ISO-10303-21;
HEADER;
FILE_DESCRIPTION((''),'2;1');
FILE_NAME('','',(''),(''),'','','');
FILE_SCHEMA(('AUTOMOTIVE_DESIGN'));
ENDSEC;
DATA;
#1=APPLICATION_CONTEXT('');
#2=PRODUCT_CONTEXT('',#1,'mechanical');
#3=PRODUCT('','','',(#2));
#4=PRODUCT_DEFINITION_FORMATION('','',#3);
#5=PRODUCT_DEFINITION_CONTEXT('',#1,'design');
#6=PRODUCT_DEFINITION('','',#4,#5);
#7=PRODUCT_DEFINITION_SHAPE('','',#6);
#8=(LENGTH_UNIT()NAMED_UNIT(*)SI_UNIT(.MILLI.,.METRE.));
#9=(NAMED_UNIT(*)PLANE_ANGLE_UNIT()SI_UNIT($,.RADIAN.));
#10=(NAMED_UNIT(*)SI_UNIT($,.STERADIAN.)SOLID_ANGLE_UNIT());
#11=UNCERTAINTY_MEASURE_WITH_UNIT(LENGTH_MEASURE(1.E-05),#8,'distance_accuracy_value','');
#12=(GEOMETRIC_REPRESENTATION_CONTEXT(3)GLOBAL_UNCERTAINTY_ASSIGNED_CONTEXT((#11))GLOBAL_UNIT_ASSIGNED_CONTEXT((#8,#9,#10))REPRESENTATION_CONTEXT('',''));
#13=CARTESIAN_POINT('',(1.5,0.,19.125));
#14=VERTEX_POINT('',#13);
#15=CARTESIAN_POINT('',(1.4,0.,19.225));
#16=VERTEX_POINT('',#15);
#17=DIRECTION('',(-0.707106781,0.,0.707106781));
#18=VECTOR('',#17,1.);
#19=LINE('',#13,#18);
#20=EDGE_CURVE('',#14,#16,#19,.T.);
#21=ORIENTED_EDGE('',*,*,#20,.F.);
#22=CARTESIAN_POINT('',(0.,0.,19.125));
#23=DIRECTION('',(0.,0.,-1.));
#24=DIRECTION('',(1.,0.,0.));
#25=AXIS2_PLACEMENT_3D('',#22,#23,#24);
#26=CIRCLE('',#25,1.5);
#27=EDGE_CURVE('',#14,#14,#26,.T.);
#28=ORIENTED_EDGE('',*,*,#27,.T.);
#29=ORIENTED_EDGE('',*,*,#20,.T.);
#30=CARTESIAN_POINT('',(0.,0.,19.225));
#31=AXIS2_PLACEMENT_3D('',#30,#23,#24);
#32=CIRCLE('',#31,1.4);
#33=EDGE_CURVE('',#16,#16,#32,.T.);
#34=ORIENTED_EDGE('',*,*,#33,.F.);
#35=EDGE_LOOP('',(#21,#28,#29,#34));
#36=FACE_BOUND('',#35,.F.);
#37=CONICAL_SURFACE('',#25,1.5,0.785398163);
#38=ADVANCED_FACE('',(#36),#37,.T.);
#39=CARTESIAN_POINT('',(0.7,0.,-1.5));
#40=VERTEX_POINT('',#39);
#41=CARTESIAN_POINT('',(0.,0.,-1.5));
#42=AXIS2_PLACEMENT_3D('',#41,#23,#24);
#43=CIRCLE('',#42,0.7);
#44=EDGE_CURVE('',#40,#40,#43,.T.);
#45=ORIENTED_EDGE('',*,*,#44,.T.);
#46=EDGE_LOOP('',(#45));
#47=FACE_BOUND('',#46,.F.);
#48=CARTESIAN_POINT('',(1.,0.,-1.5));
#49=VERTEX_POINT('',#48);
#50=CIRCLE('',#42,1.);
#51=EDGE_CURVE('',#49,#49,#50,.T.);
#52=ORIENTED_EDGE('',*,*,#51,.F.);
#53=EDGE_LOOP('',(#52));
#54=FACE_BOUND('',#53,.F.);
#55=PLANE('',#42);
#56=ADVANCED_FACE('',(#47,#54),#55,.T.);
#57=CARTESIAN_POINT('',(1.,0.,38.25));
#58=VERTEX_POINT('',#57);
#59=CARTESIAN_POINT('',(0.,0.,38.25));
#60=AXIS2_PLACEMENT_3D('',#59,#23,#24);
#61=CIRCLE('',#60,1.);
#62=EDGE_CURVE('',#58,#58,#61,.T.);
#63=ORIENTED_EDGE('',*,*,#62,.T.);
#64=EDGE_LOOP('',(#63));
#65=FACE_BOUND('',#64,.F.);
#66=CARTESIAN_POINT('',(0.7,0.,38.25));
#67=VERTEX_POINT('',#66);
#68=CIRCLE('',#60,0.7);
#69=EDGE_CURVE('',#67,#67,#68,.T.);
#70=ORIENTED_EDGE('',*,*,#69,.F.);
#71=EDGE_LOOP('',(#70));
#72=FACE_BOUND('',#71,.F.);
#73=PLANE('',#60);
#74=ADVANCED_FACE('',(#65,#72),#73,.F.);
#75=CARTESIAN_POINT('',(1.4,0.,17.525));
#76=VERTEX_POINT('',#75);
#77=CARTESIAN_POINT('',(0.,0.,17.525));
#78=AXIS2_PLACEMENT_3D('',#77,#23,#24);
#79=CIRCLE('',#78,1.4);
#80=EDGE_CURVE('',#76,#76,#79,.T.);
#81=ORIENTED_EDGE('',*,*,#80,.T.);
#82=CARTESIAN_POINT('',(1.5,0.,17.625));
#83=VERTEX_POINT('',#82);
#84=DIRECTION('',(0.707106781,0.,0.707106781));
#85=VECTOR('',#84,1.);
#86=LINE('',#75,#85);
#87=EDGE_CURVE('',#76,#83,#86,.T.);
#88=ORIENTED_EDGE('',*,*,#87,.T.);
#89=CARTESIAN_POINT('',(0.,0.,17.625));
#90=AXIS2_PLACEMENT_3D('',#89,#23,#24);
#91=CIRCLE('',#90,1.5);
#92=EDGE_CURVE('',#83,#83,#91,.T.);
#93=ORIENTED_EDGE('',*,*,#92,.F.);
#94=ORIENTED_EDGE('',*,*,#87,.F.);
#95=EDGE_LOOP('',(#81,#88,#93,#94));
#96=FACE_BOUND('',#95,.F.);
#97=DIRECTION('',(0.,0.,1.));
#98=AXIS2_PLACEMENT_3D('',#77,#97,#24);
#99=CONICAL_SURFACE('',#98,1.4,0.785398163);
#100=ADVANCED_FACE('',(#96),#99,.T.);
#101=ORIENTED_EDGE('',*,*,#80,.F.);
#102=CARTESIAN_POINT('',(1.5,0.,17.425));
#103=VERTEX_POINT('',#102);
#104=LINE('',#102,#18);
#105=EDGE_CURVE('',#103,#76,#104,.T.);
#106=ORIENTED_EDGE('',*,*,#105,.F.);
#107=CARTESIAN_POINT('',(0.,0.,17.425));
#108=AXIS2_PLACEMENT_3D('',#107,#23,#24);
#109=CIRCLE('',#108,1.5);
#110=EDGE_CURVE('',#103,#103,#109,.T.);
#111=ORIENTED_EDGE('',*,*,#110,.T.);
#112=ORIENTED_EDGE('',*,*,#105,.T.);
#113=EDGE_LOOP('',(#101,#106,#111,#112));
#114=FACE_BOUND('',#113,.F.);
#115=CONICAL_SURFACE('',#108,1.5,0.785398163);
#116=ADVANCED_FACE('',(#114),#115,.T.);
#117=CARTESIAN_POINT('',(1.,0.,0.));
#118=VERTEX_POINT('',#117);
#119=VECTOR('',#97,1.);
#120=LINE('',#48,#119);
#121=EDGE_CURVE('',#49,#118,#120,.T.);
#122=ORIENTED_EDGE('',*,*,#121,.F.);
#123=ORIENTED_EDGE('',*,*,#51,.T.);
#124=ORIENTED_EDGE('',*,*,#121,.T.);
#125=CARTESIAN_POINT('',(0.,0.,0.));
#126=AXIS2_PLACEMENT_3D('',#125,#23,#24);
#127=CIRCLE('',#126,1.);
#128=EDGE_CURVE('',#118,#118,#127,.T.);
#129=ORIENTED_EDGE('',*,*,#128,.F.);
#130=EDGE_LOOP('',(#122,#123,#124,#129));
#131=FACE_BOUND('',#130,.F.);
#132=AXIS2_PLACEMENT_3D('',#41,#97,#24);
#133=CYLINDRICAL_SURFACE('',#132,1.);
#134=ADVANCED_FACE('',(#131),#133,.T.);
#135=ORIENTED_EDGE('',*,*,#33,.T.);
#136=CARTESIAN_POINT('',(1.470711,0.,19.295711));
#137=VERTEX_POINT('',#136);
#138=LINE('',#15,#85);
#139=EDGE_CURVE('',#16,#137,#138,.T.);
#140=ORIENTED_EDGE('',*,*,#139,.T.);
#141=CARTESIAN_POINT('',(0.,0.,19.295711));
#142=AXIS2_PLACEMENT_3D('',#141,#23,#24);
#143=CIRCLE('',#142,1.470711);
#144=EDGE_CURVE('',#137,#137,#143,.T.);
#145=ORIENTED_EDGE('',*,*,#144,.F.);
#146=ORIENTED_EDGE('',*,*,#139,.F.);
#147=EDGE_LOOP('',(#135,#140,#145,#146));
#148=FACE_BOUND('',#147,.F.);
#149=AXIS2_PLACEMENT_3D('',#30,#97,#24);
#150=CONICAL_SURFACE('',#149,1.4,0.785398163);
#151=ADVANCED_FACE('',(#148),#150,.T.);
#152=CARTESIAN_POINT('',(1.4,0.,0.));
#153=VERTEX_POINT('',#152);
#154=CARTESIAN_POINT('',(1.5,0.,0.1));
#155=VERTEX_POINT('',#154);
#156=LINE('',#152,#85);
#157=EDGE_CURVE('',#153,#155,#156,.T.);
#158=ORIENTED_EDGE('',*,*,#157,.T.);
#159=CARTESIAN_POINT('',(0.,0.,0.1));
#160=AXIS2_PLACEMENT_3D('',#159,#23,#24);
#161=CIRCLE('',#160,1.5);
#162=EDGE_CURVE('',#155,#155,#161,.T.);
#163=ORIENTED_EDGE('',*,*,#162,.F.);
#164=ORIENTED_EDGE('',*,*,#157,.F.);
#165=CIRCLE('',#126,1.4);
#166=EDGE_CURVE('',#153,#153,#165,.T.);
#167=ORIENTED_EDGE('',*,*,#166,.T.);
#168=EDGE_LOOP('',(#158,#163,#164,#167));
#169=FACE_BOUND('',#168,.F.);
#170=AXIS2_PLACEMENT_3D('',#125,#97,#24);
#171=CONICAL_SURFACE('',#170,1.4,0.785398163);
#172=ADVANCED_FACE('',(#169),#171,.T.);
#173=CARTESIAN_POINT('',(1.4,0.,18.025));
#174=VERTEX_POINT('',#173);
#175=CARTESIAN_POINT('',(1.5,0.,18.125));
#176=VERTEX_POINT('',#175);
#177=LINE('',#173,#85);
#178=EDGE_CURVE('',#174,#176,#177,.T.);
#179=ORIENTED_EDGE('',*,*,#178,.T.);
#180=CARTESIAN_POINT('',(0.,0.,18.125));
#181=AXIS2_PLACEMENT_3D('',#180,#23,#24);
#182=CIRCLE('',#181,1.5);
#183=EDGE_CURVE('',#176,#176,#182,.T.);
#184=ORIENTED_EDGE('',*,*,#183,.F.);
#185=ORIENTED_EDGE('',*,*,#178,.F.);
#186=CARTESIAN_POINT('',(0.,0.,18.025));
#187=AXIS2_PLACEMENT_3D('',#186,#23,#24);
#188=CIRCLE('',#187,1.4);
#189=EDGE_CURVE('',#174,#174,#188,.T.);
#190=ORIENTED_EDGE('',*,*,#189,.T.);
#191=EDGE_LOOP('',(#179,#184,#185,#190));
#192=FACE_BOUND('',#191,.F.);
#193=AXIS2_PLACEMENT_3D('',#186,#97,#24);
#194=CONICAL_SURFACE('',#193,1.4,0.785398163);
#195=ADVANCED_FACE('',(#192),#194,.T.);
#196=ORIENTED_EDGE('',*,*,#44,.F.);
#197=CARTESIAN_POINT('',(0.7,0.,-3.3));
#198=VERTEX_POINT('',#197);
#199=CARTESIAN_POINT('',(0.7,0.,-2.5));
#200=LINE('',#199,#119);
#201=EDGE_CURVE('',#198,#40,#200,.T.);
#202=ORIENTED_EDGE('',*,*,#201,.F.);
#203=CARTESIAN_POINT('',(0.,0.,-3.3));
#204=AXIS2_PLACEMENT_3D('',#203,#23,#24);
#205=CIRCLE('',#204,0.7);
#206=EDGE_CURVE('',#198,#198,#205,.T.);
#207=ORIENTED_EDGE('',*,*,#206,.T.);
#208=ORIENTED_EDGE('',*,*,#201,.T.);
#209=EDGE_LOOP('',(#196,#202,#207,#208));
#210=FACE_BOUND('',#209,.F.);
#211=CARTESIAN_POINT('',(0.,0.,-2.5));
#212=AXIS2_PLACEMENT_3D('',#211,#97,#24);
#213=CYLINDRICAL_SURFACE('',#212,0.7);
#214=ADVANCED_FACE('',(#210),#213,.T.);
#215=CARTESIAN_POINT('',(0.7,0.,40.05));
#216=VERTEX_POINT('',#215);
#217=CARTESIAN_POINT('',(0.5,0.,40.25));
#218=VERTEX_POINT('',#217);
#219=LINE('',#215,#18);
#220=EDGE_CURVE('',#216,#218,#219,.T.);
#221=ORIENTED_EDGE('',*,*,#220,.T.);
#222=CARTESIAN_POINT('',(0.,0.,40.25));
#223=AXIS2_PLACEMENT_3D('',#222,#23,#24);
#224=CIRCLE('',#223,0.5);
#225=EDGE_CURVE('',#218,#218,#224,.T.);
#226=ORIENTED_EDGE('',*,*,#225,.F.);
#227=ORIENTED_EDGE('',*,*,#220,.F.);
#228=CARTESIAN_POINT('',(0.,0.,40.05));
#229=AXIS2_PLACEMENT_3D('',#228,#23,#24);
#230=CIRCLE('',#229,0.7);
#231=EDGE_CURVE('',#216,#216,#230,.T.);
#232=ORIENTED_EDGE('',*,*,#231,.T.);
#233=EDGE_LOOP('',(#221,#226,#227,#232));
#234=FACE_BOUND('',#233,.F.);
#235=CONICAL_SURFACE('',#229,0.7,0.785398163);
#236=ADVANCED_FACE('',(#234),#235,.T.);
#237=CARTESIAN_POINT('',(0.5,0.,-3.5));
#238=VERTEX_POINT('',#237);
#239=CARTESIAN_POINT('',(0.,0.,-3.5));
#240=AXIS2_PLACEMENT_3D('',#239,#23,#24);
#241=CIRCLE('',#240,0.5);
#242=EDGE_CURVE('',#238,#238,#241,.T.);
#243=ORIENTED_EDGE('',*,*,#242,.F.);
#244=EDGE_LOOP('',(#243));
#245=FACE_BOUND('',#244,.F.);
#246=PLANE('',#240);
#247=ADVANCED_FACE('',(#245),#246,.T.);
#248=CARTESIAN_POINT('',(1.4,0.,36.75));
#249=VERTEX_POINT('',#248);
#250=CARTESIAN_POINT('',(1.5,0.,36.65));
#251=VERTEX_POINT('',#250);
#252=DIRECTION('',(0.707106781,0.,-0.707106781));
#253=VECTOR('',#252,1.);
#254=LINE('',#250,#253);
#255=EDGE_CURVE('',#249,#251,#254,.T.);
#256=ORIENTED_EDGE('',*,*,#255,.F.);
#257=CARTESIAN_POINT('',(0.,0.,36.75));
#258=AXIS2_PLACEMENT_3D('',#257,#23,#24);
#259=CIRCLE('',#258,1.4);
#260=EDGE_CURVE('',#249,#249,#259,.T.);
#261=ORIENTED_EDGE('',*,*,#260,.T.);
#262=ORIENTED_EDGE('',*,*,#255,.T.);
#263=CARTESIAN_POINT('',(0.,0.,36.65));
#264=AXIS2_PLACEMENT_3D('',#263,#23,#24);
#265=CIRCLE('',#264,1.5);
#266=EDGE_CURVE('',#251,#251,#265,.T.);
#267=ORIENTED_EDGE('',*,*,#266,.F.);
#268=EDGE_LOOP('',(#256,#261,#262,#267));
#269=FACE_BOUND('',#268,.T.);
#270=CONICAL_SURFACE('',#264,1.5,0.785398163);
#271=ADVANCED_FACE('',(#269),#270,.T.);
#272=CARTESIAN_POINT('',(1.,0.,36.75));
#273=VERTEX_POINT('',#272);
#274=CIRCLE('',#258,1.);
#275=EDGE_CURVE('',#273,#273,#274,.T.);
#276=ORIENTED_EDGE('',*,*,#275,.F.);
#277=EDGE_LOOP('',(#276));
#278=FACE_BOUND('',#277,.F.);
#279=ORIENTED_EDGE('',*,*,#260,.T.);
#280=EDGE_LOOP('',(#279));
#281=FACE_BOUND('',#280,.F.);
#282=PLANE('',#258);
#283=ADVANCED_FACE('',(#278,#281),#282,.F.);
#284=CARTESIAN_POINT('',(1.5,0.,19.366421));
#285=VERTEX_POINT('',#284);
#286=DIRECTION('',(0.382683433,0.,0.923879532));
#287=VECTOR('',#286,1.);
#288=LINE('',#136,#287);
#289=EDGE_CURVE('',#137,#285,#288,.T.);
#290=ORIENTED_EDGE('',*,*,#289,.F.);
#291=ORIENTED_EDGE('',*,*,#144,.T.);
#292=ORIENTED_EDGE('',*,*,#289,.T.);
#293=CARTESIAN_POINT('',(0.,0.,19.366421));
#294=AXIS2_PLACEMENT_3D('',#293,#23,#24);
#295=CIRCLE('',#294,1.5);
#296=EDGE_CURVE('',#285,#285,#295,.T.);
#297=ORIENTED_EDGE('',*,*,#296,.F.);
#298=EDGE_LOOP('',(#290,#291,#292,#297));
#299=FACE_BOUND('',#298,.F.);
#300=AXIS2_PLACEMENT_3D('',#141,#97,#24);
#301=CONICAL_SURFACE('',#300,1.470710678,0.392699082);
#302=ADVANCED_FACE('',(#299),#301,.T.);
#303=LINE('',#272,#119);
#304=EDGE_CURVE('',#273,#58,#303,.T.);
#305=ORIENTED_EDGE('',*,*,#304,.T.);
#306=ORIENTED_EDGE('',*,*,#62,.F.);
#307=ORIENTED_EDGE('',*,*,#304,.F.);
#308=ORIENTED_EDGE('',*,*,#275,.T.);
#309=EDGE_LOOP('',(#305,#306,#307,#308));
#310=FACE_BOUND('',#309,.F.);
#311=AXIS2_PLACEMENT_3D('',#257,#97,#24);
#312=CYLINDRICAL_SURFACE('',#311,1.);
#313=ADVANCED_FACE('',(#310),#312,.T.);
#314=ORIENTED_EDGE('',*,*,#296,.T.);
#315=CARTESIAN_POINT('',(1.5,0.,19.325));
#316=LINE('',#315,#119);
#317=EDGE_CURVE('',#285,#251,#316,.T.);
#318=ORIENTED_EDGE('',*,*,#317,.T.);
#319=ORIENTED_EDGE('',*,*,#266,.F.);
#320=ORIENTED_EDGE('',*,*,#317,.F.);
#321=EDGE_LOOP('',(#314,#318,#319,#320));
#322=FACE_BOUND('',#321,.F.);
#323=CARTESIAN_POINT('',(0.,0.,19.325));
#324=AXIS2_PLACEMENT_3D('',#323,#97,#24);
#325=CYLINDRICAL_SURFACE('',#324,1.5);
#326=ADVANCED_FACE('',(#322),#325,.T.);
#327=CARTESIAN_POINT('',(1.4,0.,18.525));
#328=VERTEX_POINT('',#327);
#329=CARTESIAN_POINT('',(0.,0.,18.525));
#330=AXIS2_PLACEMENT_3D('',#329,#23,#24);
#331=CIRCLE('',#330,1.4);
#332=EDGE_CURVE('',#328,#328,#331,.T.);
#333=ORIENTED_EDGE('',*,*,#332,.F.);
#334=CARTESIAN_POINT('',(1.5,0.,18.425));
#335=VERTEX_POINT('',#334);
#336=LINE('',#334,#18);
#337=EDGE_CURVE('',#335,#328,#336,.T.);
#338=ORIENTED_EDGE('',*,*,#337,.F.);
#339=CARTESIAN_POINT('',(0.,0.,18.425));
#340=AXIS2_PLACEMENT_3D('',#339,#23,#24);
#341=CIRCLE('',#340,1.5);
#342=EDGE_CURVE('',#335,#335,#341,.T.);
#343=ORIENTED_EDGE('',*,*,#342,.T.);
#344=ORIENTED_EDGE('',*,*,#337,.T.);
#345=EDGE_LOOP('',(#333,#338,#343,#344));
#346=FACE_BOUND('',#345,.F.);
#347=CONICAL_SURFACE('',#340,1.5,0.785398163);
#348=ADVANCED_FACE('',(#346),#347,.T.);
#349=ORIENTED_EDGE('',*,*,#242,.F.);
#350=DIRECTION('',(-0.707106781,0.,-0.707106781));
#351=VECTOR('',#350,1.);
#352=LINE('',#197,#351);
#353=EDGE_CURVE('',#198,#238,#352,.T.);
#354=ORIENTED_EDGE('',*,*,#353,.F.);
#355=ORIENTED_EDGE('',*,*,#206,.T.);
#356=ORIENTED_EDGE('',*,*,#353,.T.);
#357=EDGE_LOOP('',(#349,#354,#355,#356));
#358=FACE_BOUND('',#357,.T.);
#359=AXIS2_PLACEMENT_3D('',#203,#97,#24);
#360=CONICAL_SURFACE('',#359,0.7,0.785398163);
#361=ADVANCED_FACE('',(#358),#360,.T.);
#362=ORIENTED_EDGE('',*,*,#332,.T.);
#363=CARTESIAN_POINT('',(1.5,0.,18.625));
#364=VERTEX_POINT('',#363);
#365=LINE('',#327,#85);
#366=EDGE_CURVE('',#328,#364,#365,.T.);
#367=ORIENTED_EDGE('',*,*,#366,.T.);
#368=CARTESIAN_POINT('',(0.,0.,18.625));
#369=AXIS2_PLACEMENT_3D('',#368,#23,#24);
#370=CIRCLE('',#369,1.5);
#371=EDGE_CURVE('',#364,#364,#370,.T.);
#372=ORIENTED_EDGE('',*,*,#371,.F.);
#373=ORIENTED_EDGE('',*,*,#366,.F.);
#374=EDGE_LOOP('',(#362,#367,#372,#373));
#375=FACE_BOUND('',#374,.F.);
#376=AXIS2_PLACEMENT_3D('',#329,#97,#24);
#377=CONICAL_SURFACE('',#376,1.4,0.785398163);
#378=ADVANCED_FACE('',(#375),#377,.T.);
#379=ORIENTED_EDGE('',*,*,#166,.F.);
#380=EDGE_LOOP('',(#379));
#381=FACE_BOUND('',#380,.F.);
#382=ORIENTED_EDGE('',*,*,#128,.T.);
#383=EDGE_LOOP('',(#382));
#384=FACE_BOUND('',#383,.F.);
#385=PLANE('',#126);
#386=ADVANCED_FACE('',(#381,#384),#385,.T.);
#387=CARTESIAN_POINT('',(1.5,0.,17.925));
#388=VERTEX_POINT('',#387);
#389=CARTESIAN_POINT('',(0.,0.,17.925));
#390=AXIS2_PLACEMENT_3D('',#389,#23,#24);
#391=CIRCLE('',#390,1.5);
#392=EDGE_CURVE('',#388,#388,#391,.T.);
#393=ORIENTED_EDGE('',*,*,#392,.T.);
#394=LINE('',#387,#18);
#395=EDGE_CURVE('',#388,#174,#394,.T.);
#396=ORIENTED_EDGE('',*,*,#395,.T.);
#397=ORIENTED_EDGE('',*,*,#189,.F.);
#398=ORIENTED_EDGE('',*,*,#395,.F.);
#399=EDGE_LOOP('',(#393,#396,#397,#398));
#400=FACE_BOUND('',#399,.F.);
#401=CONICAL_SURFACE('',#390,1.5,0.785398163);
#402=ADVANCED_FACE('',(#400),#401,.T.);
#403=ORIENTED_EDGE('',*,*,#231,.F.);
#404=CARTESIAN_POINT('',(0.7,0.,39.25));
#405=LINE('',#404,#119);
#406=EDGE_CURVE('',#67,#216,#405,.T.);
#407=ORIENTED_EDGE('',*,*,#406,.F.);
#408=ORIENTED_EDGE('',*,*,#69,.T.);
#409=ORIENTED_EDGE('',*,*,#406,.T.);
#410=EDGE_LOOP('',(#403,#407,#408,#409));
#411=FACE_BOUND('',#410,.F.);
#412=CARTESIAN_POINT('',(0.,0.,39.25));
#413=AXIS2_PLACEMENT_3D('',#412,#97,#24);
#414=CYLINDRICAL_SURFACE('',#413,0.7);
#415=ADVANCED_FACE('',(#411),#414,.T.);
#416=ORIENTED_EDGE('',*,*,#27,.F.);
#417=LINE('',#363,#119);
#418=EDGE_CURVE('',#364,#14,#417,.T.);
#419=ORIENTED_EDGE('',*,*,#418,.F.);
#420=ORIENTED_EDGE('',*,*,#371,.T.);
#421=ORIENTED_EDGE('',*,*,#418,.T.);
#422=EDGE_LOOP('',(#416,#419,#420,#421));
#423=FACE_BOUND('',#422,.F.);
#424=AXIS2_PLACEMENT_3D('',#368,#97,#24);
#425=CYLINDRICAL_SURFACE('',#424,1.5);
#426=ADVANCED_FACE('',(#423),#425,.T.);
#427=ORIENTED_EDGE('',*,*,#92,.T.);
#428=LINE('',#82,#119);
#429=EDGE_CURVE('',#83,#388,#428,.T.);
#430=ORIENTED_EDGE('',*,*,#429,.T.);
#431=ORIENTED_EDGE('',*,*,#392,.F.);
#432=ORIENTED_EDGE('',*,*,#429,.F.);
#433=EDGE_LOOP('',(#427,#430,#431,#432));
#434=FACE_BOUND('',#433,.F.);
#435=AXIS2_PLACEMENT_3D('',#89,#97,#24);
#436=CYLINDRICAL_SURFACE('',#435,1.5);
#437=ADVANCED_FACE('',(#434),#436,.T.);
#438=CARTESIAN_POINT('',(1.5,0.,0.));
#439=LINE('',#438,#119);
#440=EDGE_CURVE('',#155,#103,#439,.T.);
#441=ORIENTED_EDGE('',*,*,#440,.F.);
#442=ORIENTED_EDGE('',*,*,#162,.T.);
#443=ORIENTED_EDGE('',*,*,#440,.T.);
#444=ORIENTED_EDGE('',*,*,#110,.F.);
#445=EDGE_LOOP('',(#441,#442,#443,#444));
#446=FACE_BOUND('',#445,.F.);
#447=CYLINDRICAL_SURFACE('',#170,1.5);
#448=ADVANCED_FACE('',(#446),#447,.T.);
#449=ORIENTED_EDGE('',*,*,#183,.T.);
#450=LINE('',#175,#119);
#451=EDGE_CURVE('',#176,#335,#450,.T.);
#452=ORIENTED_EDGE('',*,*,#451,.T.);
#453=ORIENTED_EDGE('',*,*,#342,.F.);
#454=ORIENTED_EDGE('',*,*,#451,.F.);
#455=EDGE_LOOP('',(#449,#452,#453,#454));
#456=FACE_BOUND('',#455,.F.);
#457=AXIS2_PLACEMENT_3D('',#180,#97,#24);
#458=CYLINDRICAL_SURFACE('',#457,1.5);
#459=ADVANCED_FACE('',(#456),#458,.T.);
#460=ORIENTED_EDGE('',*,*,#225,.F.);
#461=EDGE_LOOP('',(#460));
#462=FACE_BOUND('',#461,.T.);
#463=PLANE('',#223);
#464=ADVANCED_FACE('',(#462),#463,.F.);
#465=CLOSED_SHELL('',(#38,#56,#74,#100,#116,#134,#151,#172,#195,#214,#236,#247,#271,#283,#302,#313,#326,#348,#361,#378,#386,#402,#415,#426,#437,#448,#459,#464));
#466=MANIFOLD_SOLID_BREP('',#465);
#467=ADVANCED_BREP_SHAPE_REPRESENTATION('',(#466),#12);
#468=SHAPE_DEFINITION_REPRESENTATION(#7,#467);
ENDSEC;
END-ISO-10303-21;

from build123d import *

# Parameters (mm, degrees)
F0_W     = 0.7
F0_H     = 2
F2_SIZE2 = 0.2
F2_SIZE  = 0.2
F3_SIZE2 = 0.1
F3_SIZE  = 0.1
F4_SIZE2 = 0.2
F4_SIZE  = 0.2


# Not quite as in the source:
# - a fillet or chamfer that OpenCascade refuses, or shapes differently, is made with other operations: its cross-section is extruded or revolved along the edge and cut away or added


with BuildPart() as f1:
    # F0 (on Front) → F1 (revolve)
    with BuildSketch(Plane.XZ):
        Polygon((0, 38.25), (0, 36.75), (1, 36.75), (1, 38.25), (0.7, 38.25), align=None)
        Polygon((1, 36.75), (0, 36.75), (0, 0), (1, 0), (1.5, 0), (1.5, 17.425), (1.4, 17.525), (1.5, 17.625), (1.5, 17.925), (1.4, 18.025), (1.5, 18.125), (1.5, 18.425), (1.4, 18.525), (1.5, 18.625), (1.5, 19.125), (1.4, 19.225), (1.5, 19.325), (1.5, 36.75), align=None)
        with Locations((0.35, 39.25)):
            Rectangle(F0_W, F0_H)
        Polygon((1, 0), (0, 0), (0, -1.5), (0.7, -1.5), (1, -1.5), align=None)
        with Locations((0.35, -2.5)):
            Rectangle(F0_W, F0_H)
    revolve(axis=Axis((0, 0, 18.375), (0, 0, -1)))

    # F2
    f2_edges = [f1.edges().sort_by_distance(p)[0] for p in [
        (-0.7, 0, 40.25),
    ]]
    chamfer(f2_edges, length=F2_SIZE, length2=F2_SIZE2)

    # F3
    f3_edges = [f1.edges().sort_by_distance(p)[0] for p in [
        (-1.5, 0, 36.75),
    ]]
    chamfer(f3_edges, length=F3_SIZE, length2=F3_SIZE2)

    # F4
    f4_edges = [f1.edges().sort_by_distance(p)[0] for p in [
        (-0.7, 0, -3.5),
    ]]
    chamfer(f4_edges, length=F4_SIZE, length2=F4_SIZE2)

    # F5: chamfer of 0.1 on 2 edges, made by hand

    # F5_s1 → F5_t2 (revolve, cut)
    with BuildSketch(Plane.XZ):
        Polygon((1.4, 0), (1.5, 0.1), (1.5, 0), align=None)
    revolve(axis=Axis((0, 0, 0), (0, 0, -1)), mode=Mode.SUBTRACT)

    # F5_s3 → F5_t4 (revolve, cut)
    with BuildSketch(Plane.XZ):
        Polygon((1.4707106781, 19.2957106781), (1.5, 19.3664213562), (1.5, 19.325), align=None)
    revolve(axis=Axis((0, 0, 19.325), (0, 0, -1)), mode=Mode.SUBTRACT)


solid = f1.part
